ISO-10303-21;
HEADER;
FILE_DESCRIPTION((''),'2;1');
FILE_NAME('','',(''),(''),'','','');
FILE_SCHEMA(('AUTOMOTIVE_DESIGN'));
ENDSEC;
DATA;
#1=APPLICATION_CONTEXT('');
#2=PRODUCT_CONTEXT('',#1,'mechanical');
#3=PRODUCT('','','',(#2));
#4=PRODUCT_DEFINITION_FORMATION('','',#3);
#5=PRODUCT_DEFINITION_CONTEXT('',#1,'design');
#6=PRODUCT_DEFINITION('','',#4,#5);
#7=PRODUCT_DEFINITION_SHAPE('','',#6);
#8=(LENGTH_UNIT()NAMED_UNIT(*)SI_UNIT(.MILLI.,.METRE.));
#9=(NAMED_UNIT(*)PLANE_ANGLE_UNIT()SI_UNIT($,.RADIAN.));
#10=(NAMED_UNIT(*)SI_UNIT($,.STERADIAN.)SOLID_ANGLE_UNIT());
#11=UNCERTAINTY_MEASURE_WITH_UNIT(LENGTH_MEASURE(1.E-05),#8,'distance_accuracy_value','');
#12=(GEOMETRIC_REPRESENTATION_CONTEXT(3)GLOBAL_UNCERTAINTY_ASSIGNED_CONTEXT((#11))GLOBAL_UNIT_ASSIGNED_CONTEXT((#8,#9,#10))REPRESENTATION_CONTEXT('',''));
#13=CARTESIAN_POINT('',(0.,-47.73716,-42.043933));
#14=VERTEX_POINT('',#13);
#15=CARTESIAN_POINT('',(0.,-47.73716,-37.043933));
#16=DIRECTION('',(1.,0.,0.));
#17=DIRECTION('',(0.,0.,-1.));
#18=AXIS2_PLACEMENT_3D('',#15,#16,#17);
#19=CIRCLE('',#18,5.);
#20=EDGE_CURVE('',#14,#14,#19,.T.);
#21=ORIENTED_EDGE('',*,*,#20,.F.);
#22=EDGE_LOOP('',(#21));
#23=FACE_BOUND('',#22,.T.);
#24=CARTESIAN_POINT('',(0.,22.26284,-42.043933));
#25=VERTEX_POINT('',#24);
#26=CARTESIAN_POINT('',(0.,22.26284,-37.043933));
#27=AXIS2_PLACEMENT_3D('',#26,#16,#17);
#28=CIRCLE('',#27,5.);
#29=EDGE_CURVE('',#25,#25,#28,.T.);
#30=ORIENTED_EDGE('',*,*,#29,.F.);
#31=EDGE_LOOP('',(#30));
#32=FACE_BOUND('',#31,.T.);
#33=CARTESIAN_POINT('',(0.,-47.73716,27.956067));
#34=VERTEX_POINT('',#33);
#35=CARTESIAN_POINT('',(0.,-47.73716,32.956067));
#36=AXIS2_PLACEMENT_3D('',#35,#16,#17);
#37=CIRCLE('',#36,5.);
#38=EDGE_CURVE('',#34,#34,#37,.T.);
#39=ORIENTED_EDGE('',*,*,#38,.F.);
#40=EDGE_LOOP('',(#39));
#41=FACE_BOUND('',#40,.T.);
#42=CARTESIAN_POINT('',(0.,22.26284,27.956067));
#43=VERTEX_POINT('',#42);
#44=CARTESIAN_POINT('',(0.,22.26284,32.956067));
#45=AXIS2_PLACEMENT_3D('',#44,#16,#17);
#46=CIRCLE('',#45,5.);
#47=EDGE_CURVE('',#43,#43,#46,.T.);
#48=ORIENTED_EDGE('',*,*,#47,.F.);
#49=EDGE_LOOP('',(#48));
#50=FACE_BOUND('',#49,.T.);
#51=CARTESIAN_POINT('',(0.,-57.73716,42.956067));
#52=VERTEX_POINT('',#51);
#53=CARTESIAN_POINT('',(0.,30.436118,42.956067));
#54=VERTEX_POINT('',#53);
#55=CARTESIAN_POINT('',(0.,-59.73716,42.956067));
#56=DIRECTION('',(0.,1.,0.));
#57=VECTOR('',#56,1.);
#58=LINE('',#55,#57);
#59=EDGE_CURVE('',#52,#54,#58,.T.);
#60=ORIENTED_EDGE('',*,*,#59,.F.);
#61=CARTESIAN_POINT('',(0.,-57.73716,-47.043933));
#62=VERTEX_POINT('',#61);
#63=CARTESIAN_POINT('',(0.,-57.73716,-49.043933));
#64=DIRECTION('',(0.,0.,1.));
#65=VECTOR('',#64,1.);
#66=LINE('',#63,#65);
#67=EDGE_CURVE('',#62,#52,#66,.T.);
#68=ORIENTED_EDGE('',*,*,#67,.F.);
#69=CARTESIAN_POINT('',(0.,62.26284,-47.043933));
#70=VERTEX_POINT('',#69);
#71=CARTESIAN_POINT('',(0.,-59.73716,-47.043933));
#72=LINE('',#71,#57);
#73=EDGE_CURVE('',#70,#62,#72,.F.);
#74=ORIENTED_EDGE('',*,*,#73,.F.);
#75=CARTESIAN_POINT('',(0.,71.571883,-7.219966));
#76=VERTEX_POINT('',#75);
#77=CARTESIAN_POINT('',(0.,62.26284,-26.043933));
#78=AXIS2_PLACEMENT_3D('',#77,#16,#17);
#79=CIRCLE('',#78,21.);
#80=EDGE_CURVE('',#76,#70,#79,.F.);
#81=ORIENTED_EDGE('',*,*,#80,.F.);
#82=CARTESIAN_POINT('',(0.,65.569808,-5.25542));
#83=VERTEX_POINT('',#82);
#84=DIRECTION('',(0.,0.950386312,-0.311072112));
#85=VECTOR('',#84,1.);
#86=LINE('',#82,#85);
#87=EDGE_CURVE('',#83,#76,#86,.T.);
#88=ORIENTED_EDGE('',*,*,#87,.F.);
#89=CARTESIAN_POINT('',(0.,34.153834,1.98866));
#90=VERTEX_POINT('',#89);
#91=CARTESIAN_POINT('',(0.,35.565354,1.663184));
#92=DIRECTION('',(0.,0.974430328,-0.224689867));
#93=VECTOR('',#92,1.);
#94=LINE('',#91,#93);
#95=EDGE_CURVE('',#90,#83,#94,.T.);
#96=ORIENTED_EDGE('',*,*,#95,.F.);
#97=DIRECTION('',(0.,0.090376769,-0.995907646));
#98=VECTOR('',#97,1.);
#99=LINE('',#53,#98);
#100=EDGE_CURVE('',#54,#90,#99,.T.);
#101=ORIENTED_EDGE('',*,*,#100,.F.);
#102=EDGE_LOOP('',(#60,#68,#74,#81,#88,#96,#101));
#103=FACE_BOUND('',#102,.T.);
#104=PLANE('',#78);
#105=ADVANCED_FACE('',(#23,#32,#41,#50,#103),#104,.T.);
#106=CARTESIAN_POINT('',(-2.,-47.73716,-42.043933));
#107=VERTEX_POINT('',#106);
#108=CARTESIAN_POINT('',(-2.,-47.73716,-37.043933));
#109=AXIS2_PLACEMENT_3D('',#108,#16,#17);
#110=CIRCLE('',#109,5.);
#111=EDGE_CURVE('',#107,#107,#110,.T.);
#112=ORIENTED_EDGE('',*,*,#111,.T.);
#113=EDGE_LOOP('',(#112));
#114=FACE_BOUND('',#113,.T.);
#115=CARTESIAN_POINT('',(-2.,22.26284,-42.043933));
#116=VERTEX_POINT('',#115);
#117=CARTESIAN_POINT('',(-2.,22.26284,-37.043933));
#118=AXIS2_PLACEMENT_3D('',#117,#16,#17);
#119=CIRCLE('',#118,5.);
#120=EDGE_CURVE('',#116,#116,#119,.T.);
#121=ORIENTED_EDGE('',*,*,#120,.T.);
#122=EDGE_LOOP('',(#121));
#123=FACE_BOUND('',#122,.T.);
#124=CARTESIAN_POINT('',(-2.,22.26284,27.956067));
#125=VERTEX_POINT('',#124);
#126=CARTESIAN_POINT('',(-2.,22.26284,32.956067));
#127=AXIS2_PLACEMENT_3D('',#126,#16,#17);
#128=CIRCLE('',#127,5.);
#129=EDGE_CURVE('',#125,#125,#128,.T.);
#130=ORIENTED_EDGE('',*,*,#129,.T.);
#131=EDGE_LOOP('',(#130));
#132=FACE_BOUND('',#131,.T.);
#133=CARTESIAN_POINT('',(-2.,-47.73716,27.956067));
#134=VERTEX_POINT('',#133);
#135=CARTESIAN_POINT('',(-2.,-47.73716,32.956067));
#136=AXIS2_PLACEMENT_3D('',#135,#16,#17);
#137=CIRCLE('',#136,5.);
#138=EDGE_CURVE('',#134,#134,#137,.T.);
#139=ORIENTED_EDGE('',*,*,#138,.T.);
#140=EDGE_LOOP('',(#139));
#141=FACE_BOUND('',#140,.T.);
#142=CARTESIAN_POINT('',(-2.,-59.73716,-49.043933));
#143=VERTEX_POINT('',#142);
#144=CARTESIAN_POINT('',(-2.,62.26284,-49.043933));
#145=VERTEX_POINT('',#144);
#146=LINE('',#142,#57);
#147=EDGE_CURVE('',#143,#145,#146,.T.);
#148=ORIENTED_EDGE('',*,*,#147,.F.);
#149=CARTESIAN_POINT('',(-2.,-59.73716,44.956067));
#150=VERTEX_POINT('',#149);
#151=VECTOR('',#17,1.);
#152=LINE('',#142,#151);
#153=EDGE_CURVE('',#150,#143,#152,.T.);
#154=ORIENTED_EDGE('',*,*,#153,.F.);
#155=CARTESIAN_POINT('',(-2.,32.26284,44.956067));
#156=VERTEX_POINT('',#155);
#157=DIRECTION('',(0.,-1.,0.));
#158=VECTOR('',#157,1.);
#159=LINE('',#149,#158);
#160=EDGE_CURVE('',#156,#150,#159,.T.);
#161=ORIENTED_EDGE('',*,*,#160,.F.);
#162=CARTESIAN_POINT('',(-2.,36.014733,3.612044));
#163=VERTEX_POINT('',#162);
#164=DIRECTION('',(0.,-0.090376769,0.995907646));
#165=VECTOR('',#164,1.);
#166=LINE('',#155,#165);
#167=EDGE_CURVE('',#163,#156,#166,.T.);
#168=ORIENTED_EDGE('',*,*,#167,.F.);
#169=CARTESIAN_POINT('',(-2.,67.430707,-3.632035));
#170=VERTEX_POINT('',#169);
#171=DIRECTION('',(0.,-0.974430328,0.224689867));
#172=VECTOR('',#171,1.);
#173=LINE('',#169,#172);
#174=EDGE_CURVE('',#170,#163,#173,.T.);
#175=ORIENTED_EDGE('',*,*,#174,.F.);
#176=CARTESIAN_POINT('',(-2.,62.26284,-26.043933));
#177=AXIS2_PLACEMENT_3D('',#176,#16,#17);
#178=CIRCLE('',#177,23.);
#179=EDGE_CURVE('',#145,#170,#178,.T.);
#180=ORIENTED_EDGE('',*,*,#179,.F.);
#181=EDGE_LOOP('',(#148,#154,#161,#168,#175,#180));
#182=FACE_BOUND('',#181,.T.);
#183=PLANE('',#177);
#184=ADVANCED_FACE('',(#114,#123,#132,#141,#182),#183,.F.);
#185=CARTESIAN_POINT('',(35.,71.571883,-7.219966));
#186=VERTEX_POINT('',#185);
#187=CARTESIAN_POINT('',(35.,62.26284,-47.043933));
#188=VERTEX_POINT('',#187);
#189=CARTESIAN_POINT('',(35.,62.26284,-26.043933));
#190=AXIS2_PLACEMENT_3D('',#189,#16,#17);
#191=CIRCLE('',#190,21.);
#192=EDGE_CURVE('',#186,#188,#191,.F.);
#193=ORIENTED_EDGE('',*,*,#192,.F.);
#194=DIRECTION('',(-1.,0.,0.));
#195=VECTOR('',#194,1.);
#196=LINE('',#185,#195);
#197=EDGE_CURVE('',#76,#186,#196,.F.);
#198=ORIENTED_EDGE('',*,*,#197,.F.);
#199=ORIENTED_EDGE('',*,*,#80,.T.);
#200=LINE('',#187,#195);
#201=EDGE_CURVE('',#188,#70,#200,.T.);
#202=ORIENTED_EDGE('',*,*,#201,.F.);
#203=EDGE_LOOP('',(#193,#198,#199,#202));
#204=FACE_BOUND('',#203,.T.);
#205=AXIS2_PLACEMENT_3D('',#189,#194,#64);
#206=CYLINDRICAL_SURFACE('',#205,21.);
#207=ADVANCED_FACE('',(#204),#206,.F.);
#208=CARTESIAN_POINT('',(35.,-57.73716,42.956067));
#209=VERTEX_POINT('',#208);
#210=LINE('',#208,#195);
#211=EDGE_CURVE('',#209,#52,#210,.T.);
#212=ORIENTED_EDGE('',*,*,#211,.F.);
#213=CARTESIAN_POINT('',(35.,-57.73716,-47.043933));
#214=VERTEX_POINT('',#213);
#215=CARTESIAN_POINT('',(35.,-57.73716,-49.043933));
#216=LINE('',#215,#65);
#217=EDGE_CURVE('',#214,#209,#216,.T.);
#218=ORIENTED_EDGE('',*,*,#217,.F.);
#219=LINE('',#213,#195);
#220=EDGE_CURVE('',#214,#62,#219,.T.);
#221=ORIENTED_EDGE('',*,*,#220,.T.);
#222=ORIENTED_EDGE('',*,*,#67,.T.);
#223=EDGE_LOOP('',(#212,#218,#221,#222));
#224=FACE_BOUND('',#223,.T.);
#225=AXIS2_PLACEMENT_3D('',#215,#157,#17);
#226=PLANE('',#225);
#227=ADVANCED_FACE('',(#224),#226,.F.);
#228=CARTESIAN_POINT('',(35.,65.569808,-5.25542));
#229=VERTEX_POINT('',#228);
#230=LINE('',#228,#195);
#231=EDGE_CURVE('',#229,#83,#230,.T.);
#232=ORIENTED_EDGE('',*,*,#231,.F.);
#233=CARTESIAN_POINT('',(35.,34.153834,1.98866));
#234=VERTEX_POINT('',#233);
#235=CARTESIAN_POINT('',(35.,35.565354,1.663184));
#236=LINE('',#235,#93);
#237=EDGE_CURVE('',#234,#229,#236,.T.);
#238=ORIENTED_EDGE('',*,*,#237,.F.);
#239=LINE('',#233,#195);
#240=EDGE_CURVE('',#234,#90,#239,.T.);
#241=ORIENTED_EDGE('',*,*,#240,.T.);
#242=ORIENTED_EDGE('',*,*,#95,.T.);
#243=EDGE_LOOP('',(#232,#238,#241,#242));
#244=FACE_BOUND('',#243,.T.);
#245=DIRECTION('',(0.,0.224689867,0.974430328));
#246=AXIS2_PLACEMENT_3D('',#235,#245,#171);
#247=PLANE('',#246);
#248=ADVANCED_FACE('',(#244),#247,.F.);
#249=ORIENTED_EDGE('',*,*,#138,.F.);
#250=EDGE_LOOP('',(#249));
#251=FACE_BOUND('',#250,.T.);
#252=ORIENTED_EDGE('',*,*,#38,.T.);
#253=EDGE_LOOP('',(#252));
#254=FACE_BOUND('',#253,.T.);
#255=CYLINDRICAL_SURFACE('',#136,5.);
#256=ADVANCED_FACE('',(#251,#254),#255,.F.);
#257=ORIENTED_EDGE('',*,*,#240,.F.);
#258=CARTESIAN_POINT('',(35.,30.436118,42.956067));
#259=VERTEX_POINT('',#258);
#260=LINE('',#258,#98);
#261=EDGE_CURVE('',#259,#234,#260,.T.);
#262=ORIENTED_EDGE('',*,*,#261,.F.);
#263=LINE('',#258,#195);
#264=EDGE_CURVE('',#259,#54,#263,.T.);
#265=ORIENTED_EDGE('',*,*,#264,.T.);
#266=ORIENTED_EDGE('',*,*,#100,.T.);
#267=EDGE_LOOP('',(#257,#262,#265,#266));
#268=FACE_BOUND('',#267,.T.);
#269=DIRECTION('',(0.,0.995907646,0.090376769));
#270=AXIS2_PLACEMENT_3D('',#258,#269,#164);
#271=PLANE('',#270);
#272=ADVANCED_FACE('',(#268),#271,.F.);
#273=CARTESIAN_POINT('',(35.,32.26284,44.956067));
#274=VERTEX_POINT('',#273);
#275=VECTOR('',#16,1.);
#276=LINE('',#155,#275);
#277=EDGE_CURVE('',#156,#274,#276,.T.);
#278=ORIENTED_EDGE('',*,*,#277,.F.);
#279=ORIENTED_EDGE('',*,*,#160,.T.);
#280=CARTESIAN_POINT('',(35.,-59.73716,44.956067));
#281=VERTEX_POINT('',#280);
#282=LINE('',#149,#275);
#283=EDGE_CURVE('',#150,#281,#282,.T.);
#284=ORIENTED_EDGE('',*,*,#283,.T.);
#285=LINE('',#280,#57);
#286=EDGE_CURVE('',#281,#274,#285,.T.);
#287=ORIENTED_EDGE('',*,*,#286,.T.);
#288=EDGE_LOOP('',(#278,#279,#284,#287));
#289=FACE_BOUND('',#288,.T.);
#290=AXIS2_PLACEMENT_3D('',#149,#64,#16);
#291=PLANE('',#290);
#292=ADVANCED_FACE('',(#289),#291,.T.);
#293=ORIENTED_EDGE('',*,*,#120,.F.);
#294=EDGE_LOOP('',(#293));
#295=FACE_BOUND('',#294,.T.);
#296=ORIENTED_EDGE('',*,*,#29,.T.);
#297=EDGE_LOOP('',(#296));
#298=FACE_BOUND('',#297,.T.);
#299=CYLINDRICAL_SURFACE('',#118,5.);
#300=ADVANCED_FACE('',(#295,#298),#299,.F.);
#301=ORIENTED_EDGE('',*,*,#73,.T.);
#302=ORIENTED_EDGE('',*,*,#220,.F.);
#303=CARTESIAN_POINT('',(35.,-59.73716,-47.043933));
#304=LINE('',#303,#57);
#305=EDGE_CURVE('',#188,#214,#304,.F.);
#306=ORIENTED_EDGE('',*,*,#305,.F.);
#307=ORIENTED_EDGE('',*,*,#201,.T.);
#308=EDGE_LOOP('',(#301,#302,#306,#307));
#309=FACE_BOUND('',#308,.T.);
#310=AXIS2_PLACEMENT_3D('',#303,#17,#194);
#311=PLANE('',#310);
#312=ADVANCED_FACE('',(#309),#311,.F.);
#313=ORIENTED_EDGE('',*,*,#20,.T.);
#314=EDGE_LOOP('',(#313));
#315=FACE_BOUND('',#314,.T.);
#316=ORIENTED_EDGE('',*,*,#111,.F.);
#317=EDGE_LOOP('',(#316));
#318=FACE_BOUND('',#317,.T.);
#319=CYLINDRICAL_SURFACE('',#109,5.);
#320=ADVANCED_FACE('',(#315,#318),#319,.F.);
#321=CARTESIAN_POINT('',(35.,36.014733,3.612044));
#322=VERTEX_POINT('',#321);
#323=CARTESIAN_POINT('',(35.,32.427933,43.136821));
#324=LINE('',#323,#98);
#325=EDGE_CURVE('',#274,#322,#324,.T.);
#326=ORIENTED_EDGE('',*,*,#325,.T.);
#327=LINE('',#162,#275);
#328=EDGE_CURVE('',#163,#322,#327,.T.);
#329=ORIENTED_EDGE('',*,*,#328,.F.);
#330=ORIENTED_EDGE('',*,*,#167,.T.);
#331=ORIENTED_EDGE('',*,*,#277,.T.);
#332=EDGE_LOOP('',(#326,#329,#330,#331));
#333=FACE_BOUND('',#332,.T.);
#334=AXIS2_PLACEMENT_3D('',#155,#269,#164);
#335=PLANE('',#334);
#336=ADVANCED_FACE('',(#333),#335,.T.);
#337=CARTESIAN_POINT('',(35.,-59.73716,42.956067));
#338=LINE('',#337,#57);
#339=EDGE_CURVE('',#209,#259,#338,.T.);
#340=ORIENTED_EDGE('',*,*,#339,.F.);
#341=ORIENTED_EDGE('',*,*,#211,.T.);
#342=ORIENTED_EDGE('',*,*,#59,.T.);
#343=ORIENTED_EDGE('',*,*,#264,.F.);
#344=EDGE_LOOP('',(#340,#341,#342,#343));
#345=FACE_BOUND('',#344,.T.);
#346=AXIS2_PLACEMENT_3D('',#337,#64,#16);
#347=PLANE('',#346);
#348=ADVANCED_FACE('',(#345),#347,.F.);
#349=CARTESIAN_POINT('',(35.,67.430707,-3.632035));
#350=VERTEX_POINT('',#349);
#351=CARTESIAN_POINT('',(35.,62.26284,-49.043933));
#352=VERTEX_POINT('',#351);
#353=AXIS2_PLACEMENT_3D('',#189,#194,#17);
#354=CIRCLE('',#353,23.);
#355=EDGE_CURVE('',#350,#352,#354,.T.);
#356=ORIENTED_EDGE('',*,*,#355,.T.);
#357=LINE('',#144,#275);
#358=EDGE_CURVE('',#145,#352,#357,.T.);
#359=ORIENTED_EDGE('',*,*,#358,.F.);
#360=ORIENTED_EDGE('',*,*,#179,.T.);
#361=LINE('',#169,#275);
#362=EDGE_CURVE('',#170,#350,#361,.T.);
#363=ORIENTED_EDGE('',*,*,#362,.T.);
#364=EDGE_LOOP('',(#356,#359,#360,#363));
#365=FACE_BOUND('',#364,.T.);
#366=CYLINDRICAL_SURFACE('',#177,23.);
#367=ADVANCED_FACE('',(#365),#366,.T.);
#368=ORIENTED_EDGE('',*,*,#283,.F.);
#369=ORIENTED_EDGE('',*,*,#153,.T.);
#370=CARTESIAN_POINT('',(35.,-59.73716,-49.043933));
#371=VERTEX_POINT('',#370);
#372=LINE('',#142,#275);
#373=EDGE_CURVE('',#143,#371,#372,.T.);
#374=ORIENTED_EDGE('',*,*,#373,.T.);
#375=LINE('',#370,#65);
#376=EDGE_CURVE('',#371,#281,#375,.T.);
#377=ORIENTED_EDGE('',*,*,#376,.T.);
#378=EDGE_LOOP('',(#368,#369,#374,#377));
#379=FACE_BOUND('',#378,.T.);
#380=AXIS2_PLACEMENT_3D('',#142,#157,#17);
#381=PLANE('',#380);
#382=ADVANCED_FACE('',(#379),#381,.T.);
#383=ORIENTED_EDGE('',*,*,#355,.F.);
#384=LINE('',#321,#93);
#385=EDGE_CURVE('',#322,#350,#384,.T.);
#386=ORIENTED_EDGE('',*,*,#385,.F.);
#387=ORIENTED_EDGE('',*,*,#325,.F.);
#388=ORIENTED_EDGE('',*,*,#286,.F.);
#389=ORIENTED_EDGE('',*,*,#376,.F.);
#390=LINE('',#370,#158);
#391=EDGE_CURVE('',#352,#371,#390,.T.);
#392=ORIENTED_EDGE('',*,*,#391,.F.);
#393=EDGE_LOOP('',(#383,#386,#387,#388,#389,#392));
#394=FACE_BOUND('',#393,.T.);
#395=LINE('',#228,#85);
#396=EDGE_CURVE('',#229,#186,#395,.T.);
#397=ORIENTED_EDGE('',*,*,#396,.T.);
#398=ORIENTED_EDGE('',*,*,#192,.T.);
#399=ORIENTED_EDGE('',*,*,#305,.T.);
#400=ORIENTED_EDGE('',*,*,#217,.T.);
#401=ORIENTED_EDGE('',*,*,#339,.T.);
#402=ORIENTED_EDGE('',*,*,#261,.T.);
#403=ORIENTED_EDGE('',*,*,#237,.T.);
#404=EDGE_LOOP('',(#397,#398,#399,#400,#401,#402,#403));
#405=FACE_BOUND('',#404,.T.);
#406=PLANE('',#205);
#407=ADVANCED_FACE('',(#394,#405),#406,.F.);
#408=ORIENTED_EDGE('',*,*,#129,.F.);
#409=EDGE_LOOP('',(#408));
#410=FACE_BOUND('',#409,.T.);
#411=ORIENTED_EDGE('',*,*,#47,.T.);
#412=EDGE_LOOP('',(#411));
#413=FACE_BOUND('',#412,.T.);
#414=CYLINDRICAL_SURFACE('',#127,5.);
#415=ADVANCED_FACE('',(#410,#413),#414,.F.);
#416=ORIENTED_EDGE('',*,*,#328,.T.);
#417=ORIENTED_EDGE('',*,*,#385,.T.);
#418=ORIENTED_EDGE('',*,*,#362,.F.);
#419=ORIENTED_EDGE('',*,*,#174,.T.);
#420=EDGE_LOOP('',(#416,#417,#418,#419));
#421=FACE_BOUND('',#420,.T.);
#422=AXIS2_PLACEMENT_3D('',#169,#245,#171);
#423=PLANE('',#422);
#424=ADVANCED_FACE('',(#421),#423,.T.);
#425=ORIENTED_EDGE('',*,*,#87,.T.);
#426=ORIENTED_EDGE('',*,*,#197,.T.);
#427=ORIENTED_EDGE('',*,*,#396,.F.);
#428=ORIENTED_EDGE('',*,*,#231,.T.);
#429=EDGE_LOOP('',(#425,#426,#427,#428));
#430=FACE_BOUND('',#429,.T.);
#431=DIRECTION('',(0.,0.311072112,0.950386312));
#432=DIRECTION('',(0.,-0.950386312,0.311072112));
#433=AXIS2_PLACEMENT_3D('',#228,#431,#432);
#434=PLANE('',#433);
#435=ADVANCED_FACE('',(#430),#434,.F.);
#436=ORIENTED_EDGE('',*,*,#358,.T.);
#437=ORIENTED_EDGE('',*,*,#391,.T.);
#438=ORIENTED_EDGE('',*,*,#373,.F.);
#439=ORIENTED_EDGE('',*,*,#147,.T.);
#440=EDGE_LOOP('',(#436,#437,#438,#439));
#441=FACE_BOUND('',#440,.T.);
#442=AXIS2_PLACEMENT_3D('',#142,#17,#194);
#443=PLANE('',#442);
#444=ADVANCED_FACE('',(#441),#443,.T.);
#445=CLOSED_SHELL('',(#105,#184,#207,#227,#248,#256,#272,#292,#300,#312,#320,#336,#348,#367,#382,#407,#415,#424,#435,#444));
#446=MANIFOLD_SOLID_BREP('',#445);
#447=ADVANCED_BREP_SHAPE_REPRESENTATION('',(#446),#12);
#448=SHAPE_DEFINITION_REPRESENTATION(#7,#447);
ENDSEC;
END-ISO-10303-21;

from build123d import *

# Parameters (mm, degrees)
SKETCH1_R           = 5
BOSS_EXTRUDE1_DEPTH = 2
EXTRUDE_THIN1_START = 35
EXTRUDE_THIN1_DEPTH = 35


with BuildPart() as part:
    # Sketch1 → Boss-Extrude1 (new body)
    with BuildSketch(Plane(origin=(0, 0, 0), x_dir=(0, 0, -1), z_dir=(1, 0, 0))):
        with BuildLine():
            Line((49.043932947, -59.7371598), (-44.956067053, -59.7371598))
            Line((-44.956067053, -59.7371598), (-44.956067053, 32.2628402))
            Line((-44.956067053, 32.2628402), (-3.612044261, 36.014733483))
            Line((-3.612044261, 36.014733483), (3.632035406, 67.43070713))
            ThreePointArc((3.632035406, 67.43070713), (28.644544082, 85.115341633), (49.043932947, 62.2628402))
            Line((49.043932947, 62.2628402), (49.043932947, -59.7371598))
        make_face()
        with Locations((37.043932947, 22.2628402)):
            Circle(SKETCH1_R, mode=Mode.SUBTRACT)
        with Locations((37.043932947, -47.7371598)):
            Circle(SKETCH1_R, mode=Mode.SUBTRACT)
        with Locations((-32.956067053, -47.7371598)):
            Circle(SKETCH1_R, mode=Mode.SUBTRACT)
        with Locations((-32.956067053, 22.2628402)):
            Circle(SKETCH1_R, mode=Mode.SUBTRACT)
    extrude(amount=-BOSS_EXTRUDE1_DEPTH)

    # Sketch2 → Extrude-Thin1 (add)
    # profile 1 of 2: a face of its own
    with BuildSketch(Plane(origin=(0, 0, 0), x_dir=(0, 0, -1), z_dir=(1, 0, 0)).offset(EXTRUDE_THIN1_START)):
        with BuildLine():
            Line((-3.612044261, 36.014733483), (3.632035406, 67.43070713))
            ThreePointArc((3.632035406, 67.43070713), (28.644544082, 85.115341633), (49.043932947, 62.2628402))
            Line((49.043932947, 62.2628402), (49.043932947, -59.7371598))
            Line((49.043932947, -59.7371598), (-44.956067053, -59.7371598))
            Line((-44.956067053, -59.7371598), (-44.956067053, 32.2628402))
            Line((-44.956067053, 32.2628402), (-42.956067053, 32.2628402))
            Line((-42.956067053, 32.2628402), (-42.956067053, -57.7371598))
            Line((-42.956067053, -57.7371598), (47.043932947, -57.7371598))
            Line((47.043932947, -57.7371598), (47.043932947, 62.2628402))
            ThreePointArc((47.043932947, 62.2628402), (28.418403983, 83.128167595), (5.580896061, 66.981327397))
            Line((5.580896061, 66.981327397), (-1.663183605, 35.56535375))
            Line((-1.663183605, 35.56535375), (-3.612044261, 36.014733483))
        make_face()
    # profile 2 of 2: a face of its own
    with BuildSketch(Plane(origin=(0, 0, 0), x_dir=(0, 0, -1), z_dir=(1, 0, 0)).offset(EXTRUDE_THIN1_START)):
        with BuildLine():
            Line((49.043932947, 62.2628402), (49.043932947, -59.7371598))
            Line((49.043932947, -59.7371598), (-44.956067053, -59.7371598))
            Line((-44.956067053, -59.7371598), (-44.956067053, 32.2628402))
            Line((-44.956067053, 32.2628402), (-3.612044261, 36.014733483))
            Line((-3.612044261, 36.014733483), (3.326726289, 66.10664892))
            Line((3.326726289, 66.10664892), (5.362716863, 72.326999445))
            ThreePointArc((5.362716863, 72.326999445), (31.207847648, 84.675648702), (49.043932947, 62.2628402))
        make_face()
        with BuildLine():
            Line((47.043932947, 62.2628402), (47.043932947, -57.7371598))
            Line((47.043932947, -57.7371598), (-42.956067053, -57.7371598))
            Line((-42.956067053, -57.7371598), (-42.956067053, 30.436118145))
            Line((-42.956067053, 30.436118145), (-1.988660061, 34.153834244))
            Line((-1.988660061, 34.153834244), (5.255419606, 65.569807891))
            Line((5.255419606, 65.569807891), (7.219966056, 71.571882604))
            ThreePointArc((7.219966056, 71.571882604), (30.82392747, 82.711596944), (47.043932947, 62.2628402))
        make_face(mode=Mode.SUBTRACT)
    extrude(amount=-EXTRUDE_THIN1_DEPTH)


solid = part.part
